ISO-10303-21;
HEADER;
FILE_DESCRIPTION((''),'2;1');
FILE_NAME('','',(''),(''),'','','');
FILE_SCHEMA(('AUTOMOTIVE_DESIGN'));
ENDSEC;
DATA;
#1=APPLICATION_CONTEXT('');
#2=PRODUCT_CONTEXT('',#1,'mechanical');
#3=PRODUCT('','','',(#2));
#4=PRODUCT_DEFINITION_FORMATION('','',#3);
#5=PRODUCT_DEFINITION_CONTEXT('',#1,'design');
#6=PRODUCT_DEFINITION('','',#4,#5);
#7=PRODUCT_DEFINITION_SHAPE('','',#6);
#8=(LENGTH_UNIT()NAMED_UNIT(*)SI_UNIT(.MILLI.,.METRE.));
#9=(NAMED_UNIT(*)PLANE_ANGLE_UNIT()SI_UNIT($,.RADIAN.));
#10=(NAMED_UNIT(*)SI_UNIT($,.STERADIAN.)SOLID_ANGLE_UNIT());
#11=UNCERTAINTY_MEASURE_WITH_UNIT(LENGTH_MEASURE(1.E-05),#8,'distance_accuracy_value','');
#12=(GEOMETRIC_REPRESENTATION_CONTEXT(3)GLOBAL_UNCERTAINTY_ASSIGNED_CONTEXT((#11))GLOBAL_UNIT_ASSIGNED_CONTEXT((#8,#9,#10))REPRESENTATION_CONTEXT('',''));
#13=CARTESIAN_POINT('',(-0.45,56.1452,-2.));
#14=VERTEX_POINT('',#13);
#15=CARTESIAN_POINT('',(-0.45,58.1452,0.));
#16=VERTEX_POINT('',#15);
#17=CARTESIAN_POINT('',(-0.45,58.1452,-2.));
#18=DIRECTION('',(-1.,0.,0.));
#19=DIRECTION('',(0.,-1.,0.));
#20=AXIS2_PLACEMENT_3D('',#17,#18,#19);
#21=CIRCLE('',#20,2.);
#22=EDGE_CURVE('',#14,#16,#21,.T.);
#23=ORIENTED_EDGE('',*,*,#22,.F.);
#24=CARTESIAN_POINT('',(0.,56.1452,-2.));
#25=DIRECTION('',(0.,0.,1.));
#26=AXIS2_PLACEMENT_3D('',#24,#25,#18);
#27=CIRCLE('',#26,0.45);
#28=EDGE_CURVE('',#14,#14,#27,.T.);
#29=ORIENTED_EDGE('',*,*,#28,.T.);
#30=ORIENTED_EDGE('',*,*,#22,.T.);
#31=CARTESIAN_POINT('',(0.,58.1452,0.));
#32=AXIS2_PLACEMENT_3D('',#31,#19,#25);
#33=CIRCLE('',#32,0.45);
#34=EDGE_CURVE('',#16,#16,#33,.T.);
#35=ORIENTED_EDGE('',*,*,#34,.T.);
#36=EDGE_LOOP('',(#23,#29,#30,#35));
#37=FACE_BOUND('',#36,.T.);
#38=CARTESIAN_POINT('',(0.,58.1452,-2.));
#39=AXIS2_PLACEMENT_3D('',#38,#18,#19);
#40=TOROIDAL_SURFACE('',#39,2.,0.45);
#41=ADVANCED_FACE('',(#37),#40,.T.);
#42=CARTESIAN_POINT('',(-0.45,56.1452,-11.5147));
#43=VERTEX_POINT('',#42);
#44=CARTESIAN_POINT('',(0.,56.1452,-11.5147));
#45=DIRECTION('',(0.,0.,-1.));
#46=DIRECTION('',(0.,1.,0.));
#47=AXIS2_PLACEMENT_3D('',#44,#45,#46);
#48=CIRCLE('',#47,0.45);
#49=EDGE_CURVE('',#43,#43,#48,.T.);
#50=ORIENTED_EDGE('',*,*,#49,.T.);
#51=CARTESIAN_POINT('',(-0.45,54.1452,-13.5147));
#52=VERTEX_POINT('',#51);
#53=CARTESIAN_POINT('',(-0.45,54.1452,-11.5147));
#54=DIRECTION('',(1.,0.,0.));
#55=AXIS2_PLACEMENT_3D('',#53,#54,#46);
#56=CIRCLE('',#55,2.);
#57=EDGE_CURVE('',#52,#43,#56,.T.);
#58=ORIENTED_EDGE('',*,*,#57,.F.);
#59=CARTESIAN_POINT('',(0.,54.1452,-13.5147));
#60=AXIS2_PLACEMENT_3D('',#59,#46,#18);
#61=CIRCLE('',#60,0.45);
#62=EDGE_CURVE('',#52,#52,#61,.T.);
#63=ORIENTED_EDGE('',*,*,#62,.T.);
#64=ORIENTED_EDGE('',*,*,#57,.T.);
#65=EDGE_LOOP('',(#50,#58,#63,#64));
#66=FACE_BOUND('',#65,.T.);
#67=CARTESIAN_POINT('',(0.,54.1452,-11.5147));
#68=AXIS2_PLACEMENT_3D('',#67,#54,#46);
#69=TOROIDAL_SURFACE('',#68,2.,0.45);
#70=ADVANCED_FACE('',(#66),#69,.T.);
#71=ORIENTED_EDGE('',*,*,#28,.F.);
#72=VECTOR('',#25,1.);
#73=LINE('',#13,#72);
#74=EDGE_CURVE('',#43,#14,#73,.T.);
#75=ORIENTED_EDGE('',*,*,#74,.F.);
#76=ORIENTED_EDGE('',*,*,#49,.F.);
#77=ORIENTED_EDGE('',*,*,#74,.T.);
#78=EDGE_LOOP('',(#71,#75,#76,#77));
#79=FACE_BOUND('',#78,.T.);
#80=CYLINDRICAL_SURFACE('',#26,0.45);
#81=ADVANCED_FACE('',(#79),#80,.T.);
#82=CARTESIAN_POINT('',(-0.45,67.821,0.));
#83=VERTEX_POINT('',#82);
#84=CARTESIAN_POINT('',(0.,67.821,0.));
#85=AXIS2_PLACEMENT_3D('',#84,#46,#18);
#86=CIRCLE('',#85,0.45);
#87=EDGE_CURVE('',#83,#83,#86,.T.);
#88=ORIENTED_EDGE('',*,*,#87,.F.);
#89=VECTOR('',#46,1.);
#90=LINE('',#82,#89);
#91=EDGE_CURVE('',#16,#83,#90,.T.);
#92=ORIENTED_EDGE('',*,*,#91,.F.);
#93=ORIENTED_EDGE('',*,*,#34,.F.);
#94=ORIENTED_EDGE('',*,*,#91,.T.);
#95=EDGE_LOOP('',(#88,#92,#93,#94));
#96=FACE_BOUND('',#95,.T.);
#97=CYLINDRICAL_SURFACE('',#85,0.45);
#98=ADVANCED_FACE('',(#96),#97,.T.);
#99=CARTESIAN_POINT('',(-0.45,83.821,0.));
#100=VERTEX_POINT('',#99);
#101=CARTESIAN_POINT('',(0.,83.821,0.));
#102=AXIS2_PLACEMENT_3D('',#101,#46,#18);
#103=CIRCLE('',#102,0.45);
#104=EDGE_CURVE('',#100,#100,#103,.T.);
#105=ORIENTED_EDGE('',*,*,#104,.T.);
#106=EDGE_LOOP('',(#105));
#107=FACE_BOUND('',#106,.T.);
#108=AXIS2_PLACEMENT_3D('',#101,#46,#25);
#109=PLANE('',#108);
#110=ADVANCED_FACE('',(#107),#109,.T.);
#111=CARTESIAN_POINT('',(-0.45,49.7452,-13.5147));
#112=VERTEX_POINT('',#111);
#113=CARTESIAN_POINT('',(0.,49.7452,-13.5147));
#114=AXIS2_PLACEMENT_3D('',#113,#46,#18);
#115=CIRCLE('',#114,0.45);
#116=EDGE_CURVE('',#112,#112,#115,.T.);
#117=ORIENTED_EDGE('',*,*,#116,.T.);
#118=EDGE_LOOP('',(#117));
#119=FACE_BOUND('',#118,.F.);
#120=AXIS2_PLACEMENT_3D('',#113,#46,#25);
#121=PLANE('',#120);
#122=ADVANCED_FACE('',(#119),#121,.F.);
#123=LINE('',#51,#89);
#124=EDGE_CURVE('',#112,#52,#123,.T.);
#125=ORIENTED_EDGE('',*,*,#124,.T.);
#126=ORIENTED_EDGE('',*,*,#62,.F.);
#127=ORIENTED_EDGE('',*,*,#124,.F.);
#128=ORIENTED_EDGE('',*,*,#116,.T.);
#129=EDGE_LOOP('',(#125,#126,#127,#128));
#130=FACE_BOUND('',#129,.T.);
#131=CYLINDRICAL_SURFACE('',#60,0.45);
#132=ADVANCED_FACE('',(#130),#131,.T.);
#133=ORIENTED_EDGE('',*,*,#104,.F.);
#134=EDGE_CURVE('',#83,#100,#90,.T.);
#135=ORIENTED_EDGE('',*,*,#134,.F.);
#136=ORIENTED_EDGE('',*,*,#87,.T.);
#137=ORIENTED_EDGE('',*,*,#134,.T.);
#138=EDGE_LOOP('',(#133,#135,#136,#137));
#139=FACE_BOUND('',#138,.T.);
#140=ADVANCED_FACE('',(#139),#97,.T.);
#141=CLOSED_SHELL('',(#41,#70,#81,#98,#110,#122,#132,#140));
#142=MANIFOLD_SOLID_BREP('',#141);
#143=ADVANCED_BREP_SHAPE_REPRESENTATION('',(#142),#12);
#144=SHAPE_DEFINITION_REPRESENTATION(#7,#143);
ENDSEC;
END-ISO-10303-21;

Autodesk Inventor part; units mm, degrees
ref_plane "YZ Plane" through (0, 0, 0) normal (1, 0, 0) x (0, 1, 0)
ref_plane "XZ Plane" through (0, 0, 0) normal (0, 1, 0) x (-1, 0, 0)
sketch "Sketch1" plane through (0, 0, 0) normal (1, 0, 0) x (0, 1, 0)
  line L0 (67.821, 0) -> (56.1452, -2.7707)
  line L1 (67.821, 0) -> (0, 0)
  dimension "d2" = 12
  dimension "d10" = 67.821
ref_plane "Work Plane1" through (0, 0, 0) normal (-1, 0, 0) x (0, 0, 1)
sketch "Sketch2" plane through (0, 0, 0) normal (-1, 0, 0) x (0, 0, 1)
  line L0 (0, 67.821) -> (0, 83.821)
  line L1 (-13.5147, 54.1452) -> (-13.5147, 49.7452)
  arc A0 (-11.5147, 56.1452) -> (-13.5147, 54.1452) centre (-11.5147, 54.1452) ccw
  line L2 (0, 67.821) -> (0, 58.1452)
  arc A1 (-2, 56.1452) -> (0, 58.1452) centre (-2, 58.1452) ccw
  line L3 (-2, 56.1452) -> (-11.5147, 56.1452)
  point P0 (-13.5147, 56.1452)
  dimension "d5" = 16
  dimension "d12" = 6.4
  dimension "d13" = 2
  dimension "d16" = 2
ref_plane "Work Plane2" through (0, 83.821, 0) normal (0, 1, 0) x (-1, 0, 0)
sketch "Sketch3" plane through (0, 83.821, 0) normal (0, 1, 0) x (-1, 0, 0)
  circle A0 centre (0, 0) radius 0.45
  dimension "d6" = 0.9
sweep "Sweep3" add profiles "Sketch3" path "Sketch2"
properties part number "cable 2"
